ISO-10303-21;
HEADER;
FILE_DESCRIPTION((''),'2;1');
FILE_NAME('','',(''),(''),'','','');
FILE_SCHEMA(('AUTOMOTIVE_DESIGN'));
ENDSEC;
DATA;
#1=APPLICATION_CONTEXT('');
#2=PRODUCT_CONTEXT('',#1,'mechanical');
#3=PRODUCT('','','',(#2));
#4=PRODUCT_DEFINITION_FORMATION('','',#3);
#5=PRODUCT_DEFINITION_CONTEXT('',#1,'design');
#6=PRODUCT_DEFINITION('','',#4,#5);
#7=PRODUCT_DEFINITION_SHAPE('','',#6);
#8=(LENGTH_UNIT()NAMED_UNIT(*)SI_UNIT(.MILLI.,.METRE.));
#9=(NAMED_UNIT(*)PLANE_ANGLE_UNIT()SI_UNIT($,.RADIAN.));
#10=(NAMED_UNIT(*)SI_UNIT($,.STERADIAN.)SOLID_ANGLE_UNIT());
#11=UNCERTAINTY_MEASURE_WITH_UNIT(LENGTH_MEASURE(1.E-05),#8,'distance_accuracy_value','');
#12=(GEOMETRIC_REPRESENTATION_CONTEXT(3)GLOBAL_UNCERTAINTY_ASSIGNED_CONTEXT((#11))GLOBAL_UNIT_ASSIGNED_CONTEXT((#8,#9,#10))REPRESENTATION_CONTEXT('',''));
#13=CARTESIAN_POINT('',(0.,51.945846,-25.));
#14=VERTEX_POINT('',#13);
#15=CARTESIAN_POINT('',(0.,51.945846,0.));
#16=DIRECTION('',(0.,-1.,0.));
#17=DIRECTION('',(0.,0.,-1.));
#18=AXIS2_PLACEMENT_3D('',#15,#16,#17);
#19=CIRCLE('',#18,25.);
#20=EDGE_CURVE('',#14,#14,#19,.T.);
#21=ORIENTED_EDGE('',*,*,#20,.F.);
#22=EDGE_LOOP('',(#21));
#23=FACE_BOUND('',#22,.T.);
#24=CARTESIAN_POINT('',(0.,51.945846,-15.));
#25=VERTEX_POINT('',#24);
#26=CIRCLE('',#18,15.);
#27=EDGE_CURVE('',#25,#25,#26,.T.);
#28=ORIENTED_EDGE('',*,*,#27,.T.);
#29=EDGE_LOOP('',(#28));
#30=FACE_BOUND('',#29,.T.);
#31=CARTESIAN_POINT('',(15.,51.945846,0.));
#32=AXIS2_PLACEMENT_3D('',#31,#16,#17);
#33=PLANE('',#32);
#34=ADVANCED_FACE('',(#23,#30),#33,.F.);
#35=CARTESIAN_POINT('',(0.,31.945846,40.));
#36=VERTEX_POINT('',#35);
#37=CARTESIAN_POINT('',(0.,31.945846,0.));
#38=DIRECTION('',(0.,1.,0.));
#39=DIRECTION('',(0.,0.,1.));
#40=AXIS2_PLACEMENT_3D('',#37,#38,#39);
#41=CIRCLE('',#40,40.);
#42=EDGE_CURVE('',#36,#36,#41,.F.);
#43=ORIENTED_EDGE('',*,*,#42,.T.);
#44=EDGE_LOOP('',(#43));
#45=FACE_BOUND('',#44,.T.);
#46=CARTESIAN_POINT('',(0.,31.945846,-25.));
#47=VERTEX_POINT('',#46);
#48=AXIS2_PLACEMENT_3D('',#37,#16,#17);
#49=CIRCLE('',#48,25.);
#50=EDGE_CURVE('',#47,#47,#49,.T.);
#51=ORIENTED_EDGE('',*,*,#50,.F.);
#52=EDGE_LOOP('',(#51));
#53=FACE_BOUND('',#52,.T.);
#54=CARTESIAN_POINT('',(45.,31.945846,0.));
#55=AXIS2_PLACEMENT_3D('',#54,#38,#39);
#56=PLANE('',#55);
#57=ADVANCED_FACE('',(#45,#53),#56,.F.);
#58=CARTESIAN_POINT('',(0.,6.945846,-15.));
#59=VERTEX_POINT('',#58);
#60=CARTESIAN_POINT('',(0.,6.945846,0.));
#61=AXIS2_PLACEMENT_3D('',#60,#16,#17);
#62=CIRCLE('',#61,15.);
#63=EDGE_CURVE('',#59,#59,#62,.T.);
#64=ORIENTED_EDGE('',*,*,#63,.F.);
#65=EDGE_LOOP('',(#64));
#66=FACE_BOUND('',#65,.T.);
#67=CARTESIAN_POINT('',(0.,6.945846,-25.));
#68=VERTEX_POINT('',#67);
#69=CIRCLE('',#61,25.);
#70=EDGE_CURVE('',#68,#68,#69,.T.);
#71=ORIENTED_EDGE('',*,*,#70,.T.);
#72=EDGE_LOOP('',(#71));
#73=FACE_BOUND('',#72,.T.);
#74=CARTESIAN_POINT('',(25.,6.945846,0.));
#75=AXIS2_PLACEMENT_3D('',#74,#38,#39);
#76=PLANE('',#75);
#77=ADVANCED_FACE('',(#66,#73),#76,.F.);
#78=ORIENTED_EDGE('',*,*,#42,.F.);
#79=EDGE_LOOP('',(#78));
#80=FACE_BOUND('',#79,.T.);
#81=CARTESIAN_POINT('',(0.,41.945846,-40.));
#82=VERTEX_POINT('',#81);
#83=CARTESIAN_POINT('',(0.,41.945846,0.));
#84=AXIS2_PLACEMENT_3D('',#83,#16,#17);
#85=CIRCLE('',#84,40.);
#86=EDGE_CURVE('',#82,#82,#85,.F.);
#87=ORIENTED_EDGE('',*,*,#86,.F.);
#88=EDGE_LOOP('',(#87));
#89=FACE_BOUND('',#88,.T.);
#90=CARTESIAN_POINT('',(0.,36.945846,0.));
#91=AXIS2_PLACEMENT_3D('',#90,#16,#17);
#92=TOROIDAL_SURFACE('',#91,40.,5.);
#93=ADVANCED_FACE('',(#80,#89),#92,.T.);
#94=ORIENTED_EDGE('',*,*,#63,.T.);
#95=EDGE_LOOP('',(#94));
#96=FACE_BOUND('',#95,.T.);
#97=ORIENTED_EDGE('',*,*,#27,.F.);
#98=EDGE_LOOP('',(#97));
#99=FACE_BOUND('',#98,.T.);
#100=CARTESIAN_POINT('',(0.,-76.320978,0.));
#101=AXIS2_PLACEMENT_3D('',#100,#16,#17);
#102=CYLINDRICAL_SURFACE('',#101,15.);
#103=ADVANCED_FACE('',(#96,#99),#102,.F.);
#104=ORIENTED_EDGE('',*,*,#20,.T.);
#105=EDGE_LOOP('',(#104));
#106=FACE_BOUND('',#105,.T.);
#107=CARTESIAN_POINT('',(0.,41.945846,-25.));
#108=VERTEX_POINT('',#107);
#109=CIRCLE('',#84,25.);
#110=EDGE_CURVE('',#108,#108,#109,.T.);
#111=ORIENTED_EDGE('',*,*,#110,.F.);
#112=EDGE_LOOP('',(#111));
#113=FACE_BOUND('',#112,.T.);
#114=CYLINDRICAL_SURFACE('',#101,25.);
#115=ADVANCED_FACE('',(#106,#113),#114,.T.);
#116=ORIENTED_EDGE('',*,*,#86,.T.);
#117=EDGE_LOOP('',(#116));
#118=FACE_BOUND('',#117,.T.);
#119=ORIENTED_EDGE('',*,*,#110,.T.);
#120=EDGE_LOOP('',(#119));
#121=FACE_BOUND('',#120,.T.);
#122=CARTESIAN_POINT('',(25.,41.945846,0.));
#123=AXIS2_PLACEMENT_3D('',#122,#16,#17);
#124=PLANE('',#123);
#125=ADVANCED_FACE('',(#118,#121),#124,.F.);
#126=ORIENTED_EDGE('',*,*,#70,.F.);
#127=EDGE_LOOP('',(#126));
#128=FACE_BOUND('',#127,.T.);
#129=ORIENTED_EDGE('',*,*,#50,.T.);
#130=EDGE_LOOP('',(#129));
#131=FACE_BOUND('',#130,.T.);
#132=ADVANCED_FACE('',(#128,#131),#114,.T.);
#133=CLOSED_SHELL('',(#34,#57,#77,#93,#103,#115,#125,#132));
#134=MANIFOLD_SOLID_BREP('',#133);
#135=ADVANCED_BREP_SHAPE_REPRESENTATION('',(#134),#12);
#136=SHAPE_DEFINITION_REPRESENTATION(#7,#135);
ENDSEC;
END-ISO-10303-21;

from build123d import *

# Parameters (mm, degrees)
REVOLVE_THIN2_START         = 6.945845758
REVOLVE_THIN2_OUTLINE_R     = 25
REVOLVE_THIN2_OUTLINE_R_2   = 15
REVOLVE_THIN2_DEPTH         = 45
REVOLVE_THIN2_START_2       = 31.945845758
REVOLVE_THIN2_2_OUTLINE_R   = 45
REVOLVE_THIN2_2_OUTLINE_R_2 = 25
REVOLVE_THIN2_2_DEPTH       = 10
FILLET4_R                   = 5


# Read off the part's stored shape, not the designer's step: Revolve-Thin2
with BuildPart() as part:
    # Revolve-Thin2 outline → Revolve-Thin2 (new body)
    with BuildSketch(Plane(origin=(0, 0, 0), x_dir=(1, 0, 0), z_dir=(0, 1, 0)).offset(REVOLVE_THIN2_START)):
        Circle(REVOLVE_THIN2_OUTLINE_R)
        Circle(REVOLVE_THIN2_OUTLINE_R_2, mode=Mode.SUBTRACT)
    extrude(amount=REVOLVE_THIN2_DEPTH)

    # Revolve-Thin2 2 outline → Revolve-Thin2 2 (add)
    with BuildSketch(Plane(origin=(0, 0, 0), x_dir=(1, 0, 0), z_dir=(0, 1, 0)).offset(REVOLVE_THIN2_START_2)):
        Circle(REVOLVE_THIN2_2_OUTLINE_R)
        Circle(REVOLVE_THIN2_2_OUTLINE_R_2, mode=Mode.SUBTRACT)
    extrude(amount=REVOLVE_THIN2_2_DEPTH)

    # Fillet4
    fillet4_edges = [part.edges().sort_by_distance(p)[0] for p in [
        (-45, 41.945845758, 0),
        (-45, 31.945845758, 0),
    ]]
    fillet(fillet4_edges, radius=FILLET4_R - 0.0001)  # a hair under: the kernel refuses the full size


solid = part.part
